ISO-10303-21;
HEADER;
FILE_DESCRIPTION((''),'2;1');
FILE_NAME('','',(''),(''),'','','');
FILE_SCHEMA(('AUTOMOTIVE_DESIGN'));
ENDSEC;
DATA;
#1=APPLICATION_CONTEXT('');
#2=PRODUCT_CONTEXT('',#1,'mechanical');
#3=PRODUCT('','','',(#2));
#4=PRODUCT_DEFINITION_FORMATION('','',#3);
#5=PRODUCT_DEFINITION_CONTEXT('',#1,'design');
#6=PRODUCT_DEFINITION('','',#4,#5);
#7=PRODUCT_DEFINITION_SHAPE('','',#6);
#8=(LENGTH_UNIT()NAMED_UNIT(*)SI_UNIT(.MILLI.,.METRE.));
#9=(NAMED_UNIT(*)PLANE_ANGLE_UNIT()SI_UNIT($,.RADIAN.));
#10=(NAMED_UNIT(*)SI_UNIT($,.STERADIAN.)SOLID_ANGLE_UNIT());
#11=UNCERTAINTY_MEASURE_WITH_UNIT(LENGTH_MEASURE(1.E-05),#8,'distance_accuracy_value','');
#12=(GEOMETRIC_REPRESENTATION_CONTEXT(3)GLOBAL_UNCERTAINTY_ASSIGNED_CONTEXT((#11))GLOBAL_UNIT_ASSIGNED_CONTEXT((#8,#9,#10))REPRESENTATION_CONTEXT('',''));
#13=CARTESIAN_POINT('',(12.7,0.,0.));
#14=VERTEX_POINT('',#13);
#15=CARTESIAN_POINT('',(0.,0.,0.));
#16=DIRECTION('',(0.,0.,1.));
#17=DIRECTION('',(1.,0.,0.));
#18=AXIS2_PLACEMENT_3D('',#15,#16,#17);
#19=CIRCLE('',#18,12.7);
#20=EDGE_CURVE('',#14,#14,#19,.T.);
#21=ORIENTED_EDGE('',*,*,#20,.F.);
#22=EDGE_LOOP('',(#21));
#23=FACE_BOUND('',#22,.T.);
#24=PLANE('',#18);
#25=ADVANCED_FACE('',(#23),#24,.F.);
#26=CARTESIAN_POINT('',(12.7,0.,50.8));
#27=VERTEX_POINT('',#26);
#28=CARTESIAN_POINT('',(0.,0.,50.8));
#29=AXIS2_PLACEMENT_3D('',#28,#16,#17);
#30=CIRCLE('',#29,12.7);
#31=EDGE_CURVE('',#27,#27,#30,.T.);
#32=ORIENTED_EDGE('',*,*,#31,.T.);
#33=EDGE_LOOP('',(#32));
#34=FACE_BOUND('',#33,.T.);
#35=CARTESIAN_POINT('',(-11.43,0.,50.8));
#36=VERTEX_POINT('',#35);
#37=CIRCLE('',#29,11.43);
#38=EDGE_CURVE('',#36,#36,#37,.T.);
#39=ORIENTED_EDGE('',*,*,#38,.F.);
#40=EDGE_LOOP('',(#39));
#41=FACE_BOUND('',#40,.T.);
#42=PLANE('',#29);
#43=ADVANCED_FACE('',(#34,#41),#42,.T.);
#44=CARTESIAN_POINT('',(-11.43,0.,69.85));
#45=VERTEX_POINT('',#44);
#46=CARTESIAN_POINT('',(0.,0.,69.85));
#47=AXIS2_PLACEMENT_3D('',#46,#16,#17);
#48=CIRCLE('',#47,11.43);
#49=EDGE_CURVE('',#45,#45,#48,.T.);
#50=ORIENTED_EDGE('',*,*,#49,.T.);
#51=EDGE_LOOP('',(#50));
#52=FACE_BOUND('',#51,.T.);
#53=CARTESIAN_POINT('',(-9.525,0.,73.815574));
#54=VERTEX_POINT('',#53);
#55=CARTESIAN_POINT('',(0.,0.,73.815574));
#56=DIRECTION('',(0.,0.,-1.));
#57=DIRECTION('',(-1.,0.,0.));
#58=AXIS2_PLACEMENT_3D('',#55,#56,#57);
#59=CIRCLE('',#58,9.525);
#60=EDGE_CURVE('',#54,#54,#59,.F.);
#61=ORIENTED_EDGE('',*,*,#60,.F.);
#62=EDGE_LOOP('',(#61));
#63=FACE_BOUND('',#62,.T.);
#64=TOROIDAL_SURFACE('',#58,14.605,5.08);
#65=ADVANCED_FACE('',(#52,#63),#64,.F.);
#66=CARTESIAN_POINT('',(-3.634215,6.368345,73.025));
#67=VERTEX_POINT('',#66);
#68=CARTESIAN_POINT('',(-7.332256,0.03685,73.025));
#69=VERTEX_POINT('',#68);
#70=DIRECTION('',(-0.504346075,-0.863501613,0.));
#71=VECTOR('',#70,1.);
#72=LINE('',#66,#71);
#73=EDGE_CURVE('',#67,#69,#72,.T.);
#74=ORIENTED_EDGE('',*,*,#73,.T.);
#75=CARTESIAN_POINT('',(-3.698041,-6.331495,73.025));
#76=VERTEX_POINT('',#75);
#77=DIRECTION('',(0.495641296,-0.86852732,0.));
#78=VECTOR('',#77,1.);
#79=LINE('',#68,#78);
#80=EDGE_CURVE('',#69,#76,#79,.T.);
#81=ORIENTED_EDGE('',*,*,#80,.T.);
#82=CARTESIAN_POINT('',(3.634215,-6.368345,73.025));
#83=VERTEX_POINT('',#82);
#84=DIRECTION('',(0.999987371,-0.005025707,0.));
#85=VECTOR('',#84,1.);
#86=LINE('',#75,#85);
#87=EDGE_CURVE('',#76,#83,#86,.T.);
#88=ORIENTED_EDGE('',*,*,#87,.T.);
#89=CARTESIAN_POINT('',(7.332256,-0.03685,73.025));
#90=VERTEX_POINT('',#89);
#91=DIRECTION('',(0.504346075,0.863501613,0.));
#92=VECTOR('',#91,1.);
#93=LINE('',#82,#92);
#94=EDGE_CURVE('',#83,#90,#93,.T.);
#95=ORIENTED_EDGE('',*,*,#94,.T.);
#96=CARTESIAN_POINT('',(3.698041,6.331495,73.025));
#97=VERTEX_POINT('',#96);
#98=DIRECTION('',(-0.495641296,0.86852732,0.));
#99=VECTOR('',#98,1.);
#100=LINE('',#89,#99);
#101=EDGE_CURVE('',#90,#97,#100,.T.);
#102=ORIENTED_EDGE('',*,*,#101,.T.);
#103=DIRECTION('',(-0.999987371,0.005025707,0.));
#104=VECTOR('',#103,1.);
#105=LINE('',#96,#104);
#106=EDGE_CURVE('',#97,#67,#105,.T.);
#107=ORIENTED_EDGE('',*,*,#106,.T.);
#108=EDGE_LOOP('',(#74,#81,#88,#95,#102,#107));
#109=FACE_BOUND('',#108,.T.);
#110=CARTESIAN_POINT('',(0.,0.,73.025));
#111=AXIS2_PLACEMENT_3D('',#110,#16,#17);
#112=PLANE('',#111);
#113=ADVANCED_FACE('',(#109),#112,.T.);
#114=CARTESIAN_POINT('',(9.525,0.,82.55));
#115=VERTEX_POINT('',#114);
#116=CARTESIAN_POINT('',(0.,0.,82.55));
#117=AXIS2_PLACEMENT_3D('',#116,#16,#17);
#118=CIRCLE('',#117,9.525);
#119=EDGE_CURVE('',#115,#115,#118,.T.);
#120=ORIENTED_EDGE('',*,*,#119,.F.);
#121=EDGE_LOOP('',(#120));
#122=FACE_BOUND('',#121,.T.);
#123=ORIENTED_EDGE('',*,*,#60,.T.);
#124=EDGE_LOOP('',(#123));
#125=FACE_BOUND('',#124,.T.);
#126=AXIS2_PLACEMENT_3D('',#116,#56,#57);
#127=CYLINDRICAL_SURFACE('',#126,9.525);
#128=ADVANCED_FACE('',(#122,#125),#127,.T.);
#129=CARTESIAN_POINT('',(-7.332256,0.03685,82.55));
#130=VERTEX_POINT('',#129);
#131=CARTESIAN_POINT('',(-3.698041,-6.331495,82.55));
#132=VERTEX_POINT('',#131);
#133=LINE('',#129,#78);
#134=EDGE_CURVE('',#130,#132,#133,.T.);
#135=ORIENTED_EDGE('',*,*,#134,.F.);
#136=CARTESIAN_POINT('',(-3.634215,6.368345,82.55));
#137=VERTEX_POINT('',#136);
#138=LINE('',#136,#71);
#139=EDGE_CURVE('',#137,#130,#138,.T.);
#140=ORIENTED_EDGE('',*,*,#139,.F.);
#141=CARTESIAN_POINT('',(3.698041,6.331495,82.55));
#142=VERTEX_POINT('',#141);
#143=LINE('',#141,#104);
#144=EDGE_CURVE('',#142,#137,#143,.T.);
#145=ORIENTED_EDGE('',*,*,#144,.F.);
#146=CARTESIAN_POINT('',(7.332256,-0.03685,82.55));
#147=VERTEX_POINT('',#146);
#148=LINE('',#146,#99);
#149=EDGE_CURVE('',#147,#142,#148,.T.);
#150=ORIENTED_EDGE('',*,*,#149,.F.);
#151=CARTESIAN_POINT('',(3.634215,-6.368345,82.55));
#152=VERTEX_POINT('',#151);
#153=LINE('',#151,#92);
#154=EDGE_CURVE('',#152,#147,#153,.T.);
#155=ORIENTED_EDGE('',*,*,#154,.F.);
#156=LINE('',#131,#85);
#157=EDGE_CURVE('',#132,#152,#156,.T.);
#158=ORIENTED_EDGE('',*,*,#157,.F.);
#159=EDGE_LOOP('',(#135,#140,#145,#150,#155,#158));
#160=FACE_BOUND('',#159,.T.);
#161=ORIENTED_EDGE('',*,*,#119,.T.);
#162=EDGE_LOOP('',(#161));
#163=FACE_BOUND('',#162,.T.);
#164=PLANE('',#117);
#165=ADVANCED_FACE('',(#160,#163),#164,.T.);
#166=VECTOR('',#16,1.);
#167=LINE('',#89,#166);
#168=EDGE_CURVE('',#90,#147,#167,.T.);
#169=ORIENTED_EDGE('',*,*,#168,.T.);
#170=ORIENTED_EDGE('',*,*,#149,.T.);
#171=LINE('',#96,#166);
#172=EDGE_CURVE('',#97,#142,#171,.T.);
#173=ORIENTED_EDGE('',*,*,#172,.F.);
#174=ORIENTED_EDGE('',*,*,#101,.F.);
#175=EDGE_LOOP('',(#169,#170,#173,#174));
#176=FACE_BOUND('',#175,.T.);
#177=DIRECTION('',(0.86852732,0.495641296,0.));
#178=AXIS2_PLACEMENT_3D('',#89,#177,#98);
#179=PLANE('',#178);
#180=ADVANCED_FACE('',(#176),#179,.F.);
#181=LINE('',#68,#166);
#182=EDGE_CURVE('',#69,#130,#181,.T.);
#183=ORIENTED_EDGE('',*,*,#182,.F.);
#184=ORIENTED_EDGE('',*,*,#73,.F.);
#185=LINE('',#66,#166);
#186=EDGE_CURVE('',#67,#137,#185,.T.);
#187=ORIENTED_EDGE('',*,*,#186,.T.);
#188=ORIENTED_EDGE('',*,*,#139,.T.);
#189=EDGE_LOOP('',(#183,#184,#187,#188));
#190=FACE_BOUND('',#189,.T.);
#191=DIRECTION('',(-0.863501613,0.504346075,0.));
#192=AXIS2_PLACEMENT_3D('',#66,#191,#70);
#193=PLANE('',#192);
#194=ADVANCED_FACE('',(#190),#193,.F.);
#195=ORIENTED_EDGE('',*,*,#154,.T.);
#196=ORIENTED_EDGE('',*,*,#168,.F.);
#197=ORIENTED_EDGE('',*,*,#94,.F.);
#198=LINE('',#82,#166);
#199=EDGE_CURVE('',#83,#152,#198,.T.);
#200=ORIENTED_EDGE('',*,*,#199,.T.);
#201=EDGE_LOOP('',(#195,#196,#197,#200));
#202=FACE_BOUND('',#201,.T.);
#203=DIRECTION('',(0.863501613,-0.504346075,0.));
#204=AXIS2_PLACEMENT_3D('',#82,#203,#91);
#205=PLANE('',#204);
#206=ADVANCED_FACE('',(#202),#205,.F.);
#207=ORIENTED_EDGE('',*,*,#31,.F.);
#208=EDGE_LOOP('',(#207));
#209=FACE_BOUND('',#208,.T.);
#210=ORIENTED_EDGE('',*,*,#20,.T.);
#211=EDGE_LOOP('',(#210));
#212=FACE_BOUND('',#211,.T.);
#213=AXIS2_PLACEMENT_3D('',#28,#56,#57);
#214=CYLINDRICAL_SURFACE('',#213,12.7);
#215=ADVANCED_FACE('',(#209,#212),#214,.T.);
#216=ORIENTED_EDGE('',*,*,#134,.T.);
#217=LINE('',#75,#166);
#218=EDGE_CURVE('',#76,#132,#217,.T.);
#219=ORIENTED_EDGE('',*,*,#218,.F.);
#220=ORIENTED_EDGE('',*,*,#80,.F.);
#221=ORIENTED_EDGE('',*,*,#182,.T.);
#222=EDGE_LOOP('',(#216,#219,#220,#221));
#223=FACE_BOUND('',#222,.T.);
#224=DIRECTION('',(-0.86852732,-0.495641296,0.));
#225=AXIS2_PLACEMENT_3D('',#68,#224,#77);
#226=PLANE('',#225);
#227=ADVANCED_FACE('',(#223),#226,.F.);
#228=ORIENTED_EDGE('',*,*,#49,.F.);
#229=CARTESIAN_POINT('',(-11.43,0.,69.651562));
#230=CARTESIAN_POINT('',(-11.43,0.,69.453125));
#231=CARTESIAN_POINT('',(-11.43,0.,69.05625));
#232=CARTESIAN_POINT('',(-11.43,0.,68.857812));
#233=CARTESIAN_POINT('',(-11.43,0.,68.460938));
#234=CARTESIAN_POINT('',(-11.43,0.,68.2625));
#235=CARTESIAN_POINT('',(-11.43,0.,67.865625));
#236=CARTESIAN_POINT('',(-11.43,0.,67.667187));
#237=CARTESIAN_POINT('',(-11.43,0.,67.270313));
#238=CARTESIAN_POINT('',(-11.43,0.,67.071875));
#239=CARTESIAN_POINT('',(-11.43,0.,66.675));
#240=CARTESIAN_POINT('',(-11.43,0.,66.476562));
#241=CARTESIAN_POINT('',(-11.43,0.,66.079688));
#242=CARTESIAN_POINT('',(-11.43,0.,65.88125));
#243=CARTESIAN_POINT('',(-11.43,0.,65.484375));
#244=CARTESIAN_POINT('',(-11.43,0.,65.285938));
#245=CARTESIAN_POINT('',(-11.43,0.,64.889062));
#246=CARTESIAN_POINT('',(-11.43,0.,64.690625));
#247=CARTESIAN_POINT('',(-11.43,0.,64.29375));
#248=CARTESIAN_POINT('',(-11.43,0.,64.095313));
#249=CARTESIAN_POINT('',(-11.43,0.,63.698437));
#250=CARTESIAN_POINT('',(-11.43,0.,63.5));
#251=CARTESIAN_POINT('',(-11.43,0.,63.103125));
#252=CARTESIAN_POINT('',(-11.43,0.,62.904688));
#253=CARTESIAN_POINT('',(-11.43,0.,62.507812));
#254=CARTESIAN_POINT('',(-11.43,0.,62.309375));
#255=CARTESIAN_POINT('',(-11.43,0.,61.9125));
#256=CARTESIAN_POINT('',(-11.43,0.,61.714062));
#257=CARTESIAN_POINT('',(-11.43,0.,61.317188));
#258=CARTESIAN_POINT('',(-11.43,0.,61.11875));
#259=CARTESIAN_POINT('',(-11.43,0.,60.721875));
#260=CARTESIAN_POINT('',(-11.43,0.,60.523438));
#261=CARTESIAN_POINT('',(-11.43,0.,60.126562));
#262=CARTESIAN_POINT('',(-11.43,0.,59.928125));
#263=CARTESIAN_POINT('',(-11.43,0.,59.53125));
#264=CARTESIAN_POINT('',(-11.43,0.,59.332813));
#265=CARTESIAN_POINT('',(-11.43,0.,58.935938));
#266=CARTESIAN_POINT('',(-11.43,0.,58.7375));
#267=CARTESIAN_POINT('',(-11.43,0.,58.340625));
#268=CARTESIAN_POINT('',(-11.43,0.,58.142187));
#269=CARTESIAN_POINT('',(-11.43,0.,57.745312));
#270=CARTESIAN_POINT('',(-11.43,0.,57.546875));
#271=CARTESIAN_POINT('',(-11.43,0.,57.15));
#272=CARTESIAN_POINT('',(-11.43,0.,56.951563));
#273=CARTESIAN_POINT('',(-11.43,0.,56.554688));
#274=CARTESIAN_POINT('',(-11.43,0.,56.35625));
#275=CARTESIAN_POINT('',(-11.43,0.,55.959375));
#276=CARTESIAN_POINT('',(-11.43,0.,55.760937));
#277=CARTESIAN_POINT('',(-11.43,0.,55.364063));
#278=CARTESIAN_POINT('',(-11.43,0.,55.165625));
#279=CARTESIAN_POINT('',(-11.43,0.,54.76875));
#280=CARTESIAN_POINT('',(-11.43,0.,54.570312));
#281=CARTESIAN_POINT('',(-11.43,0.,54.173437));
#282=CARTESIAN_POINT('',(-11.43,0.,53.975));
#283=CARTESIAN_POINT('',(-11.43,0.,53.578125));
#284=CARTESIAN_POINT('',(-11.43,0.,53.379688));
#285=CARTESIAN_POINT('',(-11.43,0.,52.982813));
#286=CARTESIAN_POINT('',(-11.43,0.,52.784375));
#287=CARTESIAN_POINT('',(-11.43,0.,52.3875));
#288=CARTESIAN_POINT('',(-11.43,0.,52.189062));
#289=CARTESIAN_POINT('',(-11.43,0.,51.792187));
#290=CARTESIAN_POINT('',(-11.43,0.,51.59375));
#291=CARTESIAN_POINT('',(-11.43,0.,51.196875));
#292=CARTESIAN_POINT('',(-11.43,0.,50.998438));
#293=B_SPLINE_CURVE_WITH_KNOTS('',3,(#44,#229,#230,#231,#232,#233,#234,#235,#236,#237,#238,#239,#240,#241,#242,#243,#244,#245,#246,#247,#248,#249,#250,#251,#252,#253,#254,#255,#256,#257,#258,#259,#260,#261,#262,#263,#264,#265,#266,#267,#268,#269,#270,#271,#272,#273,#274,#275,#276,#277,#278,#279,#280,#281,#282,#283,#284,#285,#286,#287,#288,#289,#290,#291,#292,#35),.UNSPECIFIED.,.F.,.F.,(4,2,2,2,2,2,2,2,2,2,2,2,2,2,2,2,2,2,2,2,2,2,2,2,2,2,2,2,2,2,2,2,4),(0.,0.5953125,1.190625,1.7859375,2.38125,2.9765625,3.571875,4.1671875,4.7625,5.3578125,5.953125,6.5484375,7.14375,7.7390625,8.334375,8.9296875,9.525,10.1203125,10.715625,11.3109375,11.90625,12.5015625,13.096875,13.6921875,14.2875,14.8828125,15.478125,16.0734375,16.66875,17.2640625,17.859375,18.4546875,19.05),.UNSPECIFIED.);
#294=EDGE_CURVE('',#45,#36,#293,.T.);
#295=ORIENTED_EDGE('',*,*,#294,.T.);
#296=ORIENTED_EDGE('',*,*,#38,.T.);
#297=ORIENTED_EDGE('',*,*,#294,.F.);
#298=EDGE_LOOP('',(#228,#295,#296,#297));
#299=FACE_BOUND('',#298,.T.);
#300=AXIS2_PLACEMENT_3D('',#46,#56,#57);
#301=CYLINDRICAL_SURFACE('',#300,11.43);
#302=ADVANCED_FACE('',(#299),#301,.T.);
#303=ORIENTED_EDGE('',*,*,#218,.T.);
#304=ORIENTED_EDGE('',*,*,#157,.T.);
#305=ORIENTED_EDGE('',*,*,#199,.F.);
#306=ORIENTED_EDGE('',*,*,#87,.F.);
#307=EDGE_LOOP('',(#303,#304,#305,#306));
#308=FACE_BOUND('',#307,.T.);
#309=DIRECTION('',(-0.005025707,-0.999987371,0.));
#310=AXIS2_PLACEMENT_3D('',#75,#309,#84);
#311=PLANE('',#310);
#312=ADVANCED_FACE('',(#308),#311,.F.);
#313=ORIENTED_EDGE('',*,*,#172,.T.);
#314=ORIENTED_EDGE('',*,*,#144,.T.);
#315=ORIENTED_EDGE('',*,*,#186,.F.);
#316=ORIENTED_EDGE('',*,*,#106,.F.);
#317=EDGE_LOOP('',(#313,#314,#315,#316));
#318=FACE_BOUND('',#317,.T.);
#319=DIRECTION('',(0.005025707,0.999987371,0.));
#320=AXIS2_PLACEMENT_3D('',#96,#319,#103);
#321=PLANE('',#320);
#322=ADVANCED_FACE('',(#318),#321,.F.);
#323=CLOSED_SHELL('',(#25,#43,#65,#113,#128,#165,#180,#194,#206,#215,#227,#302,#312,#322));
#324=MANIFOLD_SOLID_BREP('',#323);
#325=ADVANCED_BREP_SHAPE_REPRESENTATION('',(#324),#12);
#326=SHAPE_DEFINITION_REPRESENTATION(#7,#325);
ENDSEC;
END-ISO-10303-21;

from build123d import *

# Parameters (mm, degrees)
SKETCH1_R           = 12.7
BOSS_EXTRUDE1_DEPTH = 50.8
SKETCH2_R           = 11.43
BOSS_EXTRUDE2_DEPTH = 19.05
SKETCH4_R           = 9.525
BOSS_EXTRUDE3_DEPTH = 12.7
FILLET1_R           = 5.08
CUT_EXTRUDE1_DEPTH  = 9.525


with BuildPart() as part:
    # Sketch1 → Boss-Extrude1 (new body)
    with BuildSketch(Plane.XY):
        Circle(SKETCH1_R)
    extrude(amount=BOSS_EXTRUDE1_DEPTH)

    # Sketch2 → Boss-Extrude2 (add)
    with BuildSketch(Plane.XY.offset(50.8)):
        with Locations(Location((0, 0, 0), (0, 0, 180))):
            Circle(SKETCH2_R)
    extrude(amount=BOSS_EXTRUDE2_DEPTH)

    # Sketch4 → Boss-Extrude3 (add)
    with BuildSketch(Plane.XY.offset(69.85)):
        Circle(SKETCH4_R)
    extrude(amount=BOSS_EXTRUDE3_DEPTH)

    # Fillet1
    # the kernel refuses this fillet: 5.08 mm, written as the material it adds along each edge
    with BuildSketch(Plane(origin=(0, 0, 69.85), x_dir=(1, 0, 0), z_dir=(0, -1, 0))) as fillet1_piece_1:
        with BuildLine():
            CenterArc((14.605, 3.965573729), FILLET1_R, 180, 51.317812547)
            Line((9.525, 3.965573729), (9.4234, 3.965573729))
            Line((9.4234, 3.965573729), (9.4234, 0))
            Line((9.4234, 0), (9.525, -0.1016))
            ThreePointArc((9.525, -0.1016), (10.4775, -0.1016), (11.3665, -0.079311475))
            Line((11.3665, -0.079311475), (11.43, 0))
        make_face()
    revolve(axis=Axis((0, 0, 69.85), (0, 0, 1)))

    # Sketch5 → Cut-Extrude1 (cut)
    with BuildSketch(Plane.XY.offset(82.55)):
        Polygon((3.698041146, 6.33149469), (-3.634214672, 6.368344922), (-7.332255819, 0.036850232), (-3.698041146, -6.33149469), (3.634214672, -6.368344922), (7.332255819, -0.036850232), align=None)
    extrude(amount=-CUT_EXTRUDE1_DEPTH, mode=Mode.SUBTRACT)


solid = part.part
